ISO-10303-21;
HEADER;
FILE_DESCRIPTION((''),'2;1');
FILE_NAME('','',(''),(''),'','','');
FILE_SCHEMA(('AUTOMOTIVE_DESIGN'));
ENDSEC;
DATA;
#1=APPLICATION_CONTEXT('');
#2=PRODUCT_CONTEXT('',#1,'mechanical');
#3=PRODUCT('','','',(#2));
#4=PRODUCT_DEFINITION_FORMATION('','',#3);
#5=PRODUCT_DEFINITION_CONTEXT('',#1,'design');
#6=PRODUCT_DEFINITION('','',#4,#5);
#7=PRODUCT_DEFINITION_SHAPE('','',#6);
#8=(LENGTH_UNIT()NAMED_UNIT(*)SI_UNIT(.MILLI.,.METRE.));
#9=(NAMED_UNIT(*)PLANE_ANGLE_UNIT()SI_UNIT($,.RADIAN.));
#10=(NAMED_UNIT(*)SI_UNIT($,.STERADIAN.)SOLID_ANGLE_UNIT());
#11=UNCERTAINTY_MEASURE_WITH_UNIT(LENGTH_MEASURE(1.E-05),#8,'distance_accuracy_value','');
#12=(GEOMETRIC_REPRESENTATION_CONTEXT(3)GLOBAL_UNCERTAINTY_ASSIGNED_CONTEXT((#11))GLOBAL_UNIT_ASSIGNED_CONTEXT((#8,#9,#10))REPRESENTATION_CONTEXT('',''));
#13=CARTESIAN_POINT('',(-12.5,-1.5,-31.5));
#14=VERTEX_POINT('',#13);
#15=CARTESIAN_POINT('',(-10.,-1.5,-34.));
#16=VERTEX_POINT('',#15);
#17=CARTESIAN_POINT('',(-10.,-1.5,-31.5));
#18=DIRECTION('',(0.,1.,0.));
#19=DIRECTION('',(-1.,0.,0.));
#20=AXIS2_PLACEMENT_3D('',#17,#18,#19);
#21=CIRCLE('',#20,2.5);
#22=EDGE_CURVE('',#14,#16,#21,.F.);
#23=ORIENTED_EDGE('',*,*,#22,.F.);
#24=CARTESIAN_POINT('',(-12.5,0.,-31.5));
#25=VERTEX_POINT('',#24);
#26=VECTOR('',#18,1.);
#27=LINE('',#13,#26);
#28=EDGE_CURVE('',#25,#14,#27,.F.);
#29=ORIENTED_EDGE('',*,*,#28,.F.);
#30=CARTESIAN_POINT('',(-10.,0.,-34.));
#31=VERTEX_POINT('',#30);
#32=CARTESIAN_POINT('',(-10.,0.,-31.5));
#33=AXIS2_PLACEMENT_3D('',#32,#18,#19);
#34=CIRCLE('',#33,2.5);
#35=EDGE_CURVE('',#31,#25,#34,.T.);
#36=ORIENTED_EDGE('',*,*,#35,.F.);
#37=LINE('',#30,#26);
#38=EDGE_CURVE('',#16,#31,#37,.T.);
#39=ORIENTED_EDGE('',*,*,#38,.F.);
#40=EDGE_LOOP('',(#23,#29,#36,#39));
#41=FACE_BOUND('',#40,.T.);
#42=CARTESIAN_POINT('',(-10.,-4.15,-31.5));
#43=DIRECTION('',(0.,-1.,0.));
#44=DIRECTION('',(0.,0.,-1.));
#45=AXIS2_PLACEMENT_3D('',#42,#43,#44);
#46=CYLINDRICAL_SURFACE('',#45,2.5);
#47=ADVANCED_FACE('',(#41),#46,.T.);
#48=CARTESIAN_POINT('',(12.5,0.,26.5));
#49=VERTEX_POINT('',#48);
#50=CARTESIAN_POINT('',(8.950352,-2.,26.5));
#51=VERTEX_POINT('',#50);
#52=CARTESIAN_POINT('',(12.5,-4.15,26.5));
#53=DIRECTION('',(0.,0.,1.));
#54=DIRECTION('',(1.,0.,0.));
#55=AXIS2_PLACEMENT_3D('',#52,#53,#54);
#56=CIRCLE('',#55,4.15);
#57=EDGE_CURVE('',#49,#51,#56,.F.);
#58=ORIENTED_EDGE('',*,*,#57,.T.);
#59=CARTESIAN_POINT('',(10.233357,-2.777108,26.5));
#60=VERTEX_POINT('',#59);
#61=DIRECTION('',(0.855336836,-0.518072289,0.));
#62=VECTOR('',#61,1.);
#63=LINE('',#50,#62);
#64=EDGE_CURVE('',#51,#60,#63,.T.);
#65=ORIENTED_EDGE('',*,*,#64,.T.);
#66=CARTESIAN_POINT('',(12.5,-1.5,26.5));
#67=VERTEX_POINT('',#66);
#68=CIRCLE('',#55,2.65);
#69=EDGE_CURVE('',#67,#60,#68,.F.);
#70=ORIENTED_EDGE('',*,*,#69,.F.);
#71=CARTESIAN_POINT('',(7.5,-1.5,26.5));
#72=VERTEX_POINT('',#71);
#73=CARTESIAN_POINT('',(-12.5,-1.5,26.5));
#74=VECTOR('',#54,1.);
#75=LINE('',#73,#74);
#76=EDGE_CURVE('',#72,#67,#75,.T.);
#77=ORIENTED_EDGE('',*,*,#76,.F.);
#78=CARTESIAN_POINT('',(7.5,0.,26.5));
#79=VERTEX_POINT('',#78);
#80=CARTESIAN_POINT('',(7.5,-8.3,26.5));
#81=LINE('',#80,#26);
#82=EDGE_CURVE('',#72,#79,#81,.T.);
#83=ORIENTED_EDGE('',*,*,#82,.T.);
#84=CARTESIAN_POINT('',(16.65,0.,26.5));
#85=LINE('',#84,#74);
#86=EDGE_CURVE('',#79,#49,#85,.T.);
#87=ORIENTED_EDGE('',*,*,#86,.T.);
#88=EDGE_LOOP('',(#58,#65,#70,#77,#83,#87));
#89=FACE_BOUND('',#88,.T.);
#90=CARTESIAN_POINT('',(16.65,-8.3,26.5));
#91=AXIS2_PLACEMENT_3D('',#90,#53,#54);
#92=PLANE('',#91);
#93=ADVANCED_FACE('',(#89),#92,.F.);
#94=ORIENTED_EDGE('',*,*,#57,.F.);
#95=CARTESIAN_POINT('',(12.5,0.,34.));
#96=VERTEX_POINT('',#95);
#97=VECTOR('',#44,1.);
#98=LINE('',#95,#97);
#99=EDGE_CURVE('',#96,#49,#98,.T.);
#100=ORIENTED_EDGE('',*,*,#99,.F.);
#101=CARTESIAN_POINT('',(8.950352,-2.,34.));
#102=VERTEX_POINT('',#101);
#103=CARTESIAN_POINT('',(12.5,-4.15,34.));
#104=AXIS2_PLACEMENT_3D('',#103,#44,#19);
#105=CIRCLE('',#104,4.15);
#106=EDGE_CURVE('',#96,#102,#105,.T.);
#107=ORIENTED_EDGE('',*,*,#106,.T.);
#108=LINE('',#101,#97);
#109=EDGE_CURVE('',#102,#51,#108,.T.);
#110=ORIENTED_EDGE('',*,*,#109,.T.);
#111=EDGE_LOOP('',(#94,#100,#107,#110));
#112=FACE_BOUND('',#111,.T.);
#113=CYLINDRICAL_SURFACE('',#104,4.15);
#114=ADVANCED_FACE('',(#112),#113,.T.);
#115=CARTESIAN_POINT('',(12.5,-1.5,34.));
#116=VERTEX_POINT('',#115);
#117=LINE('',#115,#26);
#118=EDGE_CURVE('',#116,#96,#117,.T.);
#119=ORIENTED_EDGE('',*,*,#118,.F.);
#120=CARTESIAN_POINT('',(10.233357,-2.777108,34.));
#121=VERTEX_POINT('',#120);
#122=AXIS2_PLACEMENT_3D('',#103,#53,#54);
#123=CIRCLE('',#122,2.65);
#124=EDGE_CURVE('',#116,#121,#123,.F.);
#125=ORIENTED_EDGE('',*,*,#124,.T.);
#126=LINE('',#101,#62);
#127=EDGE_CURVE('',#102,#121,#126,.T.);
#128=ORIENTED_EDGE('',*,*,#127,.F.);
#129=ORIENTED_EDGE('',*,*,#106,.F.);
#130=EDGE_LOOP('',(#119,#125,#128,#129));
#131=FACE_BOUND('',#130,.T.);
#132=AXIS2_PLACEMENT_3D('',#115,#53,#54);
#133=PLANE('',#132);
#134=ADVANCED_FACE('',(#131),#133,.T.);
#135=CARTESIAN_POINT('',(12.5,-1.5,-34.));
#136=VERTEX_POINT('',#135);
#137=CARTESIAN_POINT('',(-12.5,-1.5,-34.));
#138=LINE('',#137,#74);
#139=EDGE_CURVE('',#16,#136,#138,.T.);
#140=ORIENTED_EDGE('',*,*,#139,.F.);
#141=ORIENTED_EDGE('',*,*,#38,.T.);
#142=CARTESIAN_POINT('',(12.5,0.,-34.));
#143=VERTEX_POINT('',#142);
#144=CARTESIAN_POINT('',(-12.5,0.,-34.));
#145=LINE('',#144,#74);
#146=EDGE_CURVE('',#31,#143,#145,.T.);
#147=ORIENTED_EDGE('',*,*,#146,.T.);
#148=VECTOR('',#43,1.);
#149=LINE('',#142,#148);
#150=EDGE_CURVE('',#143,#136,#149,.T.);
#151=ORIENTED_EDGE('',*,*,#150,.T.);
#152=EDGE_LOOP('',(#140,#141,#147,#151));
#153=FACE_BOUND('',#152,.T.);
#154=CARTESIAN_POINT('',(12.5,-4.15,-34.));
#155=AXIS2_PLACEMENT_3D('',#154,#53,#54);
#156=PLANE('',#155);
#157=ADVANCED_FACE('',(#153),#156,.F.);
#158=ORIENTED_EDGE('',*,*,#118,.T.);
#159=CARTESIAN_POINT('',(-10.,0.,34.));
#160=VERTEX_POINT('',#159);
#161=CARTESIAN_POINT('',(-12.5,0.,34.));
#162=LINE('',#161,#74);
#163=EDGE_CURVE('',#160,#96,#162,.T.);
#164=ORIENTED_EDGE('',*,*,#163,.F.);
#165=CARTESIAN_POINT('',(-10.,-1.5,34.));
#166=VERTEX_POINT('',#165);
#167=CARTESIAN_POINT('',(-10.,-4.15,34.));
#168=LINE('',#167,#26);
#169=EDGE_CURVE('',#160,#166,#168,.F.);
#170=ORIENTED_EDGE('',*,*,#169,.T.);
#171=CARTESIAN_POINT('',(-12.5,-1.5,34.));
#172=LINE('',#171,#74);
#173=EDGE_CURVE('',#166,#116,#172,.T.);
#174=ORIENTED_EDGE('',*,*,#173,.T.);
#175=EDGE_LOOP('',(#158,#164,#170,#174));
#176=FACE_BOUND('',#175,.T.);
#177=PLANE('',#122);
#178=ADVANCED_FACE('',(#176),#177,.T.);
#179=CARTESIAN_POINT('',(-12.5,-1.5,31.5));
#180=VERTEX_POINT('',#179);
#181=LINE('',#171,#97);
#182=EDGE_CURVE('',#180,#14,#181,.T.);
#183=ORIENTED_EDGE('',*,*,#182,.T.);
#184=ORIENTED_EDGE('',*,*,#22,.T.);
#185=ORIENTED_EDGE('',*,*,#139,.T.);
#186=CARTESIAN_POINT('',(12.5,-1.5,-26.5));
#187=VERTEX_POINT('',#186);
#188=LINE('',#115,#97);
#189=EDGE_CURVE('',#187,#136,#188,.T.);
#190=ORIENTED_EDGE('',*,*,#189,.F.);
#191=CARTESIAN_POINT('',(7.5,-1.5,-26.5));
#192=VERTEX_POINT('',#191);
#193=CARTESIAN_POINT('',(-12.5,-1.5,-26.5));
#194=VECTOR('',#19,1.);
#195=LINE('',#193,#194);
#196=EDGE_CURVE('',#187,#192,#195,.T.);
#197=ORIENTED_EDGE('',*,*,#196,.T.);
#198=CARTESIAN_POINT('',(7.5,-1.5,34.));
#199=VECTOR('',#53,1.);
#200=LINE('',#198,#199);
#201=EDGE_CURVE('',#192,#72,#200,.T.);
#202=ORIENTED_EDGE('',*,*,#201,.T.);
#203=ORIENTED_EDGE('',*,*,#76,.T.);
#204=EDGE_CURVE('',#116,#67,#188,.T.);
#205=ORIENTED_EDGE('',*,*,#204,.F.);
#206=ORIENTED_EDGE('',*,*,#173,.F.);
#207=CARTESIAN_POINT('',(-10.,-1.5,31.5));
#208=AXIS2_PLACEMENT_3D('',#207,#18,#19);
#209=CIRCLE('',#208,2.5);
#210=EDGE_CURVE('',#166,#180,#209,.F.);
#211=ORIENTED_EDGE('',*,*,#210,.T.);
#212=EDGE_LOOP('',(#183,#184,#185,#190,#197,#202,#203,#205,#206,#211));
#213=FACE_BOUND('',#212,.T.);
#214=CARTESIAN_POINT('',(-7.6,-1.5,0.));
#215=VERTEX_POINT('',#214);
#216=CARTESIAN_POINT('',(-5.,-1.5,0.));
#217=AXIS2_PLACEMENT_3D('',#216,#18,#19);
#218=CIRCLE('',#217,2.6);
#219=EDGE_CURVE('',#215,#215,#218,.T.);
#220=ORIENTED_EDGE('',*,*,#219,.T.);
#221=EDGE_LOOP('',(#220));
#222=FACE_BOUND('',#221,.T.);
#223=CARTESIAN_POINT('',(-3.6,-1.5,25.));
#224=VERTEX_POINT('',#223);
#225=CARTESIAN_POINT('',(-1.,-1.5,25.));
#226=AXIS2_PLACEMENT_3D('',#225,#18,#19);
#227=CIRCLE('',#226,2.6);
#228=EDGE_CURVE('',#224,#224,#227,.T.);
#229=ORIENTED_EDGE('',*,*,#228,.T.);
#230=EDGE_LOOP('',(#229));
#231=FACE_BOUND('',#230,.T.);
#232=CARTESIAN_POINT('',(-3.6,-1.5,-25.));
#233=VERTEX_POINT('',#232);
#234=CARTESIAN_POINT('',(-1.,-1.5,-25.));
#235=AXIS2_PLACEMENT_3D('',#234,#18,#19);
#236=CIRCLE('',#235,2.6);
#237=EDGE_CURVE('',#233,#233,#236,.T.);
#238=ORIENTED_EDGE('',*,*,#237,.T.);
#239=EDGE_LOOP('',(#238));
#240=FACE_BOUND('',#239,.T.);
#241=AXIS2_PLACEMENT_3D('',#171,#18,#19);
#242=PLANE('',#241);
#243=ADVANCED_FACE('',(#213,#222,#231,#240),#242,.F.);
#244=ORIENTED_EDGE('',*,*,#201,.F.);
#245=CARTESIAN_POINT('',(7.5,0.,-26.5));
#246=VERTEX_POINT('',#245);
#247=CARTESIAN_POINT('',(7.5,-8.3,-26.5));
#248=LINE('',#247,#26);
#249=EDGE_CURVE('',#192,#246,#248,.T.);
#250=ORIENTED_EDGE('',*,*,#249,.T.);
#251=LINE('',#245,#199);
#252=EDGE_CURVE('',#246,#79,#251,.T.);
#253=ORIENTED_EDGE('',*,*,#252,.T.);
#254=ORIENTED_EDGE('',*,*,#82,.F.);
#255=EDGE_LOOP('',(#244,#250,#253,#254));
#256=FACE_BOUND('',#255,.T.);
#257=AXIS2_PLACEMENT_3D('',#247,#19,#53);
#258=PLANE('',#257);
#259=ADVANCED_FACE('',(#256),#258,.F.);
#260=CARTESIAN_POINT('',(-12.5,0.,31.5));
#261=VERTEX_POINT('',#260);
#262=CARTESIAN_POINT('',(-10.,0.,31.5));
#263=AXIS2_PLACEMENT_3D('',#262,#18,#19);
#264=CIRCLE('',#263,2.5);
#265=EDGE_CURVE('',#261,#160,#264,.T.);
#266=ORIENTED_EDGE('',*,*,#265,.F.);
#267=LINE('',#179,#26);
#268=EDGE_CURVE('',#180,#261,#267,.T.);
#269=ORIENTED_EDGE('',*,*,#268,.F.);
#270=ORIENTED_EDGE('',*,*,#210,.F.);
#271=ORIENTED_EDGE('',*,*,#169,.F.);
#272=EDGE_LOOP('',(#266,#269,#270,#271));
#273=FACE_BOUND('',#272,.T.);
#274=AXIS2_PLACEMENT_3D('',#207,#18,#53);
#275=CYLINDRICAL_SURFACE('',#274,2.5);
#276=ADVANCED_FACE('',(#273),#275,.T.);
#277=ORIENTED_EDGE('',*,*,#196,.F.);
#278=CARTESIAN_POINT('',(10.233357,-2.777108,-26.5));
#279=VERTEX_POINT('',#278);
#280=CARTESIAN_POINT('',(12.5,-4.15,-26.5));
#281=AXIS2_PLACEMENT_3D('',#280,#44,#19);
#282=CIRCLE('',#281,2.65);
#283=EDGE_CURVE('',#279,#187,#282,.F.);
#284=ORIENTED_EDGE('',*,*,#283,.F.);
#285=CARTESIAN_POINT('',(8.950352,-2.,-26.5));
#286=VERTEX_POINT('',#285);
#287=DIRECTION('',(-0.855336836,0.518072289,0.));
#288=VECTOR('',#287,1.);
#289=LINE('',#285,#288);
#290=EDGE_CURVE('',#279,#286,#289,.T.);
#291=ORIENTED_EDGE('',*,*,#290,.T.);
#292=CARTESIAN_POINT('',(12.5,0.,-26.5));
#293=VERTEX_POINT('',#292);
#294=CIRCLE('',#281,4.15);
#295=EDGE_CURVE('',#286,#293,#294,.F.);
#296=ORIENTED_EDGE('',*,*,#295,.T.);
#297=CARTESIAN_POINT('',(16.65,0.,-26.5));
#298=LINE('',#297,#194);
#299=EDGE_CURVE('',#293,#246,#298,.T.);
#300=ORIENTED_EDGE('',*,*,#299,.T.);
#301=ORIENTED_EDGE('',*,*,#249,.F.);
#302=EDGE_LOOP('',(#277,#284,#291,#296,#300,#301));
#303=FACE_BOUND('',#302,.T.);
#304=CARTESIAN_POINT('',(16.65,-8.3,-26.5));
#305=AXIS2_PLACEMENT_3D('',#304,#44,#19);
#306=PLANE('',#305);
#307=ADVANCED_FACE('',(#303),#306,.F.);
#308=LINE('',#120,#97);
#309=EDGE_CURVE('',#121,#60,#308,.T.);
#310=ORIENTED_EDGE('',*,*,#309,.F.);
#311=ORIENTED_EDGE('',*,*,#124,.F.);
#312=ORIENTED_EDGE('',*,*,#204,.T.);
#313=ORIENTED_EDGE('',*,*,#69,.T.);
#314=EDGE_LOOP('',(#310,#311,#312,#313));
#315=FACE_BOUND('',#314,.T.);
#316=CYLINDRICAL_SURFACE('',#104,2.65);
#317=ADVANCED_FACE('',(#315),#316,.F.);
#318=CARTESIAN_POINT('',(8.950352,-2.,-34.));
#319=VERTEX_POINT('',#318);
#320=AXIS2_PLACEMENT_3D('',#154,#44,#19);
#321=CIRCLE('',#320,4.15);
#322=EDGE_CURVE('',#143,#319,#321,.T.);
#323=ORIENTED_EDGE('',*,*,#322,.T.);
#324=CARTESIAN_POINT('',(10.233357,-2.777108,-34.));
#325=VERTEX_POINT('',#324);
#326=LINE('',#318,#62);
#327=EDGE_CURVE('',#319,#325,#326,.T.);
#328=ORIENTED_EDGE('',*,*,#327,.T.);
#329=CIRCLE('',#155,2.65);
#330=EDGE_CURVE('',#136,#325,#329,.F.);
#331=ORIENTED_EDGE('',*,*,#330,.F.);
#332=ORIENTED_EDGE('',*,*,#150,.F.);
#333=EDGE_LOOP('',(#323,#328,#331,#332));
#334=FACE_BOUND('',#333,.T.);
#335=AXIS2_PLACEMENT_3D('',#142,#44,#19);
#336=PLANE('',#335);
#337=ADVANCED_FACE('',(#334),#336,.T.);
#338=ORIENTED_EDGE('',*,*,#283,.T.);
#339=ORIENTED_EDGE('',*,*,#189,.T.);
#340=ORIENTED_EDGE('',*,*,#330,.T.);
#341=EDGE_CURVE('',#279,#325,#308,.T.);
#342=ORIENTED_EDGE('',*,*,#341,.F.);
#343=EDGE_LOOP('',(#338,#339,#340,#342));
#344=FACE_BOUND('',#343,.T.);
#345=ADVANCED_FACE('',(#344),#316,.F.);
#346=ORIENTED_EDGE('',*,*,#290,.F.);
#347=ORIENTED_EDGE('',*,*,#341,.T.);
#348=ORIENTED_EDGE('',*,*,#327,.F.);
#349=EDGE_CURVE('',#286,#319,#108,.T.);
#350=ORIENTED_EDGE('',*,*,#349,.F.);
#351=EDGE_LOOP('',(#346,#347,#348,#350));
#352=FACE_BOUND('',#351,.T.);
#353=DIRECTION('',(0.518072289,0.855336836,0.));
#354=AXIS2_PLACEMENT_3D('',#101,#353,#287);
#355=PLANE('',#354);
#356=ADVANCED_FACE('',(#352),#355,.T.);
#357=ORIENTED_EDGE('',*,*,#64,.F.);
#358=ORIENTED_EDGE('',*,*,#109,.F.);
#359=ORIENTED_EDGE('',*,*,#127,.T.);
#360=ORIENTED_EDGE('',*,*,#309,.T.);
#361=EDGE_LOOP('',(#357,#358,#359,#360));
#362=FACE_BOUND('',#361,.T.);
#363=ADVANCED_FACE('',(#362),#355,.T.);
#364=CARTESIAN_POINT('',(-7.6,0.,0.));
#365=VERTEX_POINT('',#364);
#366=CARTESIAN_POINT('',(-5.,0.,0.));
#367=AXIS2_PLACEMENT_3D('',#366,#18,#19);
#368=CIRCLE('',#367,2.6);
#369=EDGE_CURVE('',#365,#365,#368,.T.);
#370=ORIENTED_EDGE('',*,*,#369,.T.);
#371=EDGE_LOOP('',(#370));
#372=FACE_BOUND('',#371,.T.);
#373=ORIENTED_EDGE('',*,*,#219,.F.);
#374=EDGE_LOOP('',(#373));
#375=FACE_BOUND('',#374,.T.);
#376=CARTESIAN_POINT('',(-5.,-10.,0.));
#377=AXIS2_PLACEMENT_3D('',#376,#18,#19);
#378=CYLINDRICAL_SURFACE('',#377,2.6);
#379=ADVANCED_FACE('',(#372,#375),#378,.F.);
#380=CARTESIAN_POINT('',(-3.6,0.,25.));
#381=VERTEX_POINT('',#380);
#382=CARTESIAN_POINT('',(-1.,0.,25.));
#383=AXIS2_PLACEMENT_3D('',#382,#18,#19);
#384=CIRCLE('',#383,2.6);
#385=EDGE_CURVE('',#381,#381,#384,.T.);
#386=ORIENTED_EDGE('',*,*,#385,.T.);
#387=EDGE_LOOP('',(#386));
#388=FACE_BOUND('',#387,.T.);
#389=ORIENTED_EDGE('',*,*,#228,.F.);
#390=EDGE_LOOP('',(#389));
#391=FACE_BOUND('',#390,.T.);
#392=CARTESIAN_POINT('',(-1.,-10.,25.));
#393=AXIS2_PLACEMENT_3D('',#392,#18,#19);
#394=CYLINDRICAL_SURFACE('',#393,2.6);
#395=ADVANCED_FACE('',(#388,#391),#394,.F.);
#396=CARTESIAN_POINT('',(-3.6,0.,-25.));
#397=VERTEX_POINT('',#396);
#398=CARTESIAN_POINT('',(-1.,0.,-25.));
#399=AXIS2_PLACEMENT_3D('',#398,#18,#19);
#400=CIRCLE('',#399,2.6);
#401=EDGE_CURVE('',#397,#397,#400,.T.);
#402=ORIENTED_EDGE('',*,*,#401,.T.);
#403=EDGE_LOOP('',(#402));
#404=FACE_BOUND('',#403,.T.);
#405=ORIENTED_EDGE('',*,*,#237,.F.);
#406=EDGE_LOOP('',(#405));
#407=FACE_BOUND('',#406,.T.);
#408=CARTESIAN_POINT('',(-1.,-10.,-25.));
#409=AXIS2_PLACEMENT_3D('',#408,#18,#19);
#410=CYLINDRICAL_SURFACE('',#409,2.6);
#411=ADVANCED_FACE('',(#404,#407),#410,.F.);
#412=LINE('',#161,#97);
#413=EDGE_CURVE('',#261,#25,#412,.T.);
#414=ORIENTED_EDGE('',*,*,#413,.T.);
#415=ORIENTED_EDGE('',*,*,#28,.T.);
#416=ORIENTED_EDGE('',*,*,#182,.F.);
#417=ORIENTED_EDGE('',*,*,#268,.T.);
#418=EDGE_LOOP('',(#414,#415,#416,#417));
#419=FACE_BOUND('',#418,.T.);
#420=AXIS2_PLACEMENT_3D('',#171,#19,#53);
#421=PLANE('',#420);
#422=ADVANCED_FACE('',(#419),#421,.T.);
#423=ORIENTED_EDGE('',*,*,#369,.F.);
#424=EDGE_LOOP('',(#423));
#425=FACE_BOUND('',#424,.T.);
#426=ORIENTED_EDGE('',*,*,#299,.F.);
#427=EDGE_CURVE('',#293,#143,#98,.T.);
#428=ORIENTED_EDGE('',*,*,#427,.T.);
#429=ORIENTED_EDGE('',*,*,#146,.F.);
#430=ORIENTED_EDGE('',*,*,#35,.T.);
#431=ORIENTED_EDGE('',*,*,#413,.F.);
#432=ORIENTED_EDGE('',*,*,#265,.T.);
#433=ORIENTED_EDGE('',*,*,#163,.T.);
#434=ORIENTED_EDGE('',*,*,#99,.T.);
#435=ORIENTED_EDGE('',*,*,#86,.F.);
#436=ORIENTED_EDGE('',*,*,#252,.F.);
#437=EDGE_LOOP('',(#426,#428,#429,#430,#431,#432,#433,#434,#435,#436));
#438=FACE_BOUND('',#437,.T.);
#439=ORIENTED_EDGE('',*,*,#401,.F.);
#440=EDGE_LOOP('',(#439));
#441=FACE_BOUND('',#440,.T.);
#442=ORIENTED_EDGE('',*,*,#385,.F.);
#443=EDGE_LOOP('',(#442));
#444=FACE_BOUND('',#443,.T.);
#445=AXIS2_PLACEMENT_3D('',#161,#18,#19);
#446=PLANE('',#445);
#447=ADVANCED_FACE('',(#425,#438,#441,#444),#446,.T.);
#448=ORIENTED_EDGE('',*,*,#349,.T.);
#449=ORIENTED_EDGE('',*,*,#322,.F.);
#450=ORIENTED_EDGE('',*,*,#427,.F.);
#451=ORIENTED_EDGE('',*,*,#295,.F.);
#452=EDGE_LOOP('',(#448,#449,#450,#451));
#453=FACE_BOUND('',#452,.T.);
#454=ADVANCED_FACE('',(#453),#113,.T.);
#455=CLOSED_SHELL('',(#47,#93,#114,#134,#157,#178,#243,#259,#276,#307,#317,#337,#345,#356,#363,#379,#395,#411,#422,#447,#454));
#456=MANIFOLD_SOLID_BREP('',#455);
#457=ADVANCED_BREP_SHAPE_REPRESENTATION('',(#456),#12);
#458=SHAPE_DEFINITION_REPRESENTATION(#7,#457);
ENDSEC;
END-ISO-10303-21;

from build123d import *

# Parameters (mm, degrees)
TABAN_FLAN_1_DEPTH    = 34
IZIM9_W               = 9.15
IZIM9_H               = 53
KES_EKSTR_ZYON1_DEPTH = 39.757096124
IZIM11_R              = 2.6
KES_EKSTR_ZYON2_DEPTH = 10
RADYUS1_R             = 2.5


# Sheet-metal steps are written as plain solids
with BuildPart() as part:
    # Çizim1 → Taban-Flanş1 (new, symmetric)
    with BuildSketch(Plane.XY):
        with BuildLine():
            Line((-12.5, 0), (12.5, 0))
            ThreePointArc((12.5, 0), (14.537154879, -7.765591238), (8.95035213, -2))
            Line((8.95035213, -2), (10.233357384, -2.777108434))
            ThreePointArc((10.233357384, -2.777108434), (13.800833838, -6.458751031), (12.5, -1.5))
            Line((12.5, -1.5), (-12.5, -1.5))
            Line((-12.5, -1.5), (-12.5, 0))
        make_face()
    extrude(amount=TABAN_FLAN_1_DEPTH, both=True)

    # Çizim9 → Kes-Ekstrüzyon1 (cut, through all)
    with BuildSketch(Plane(origin=(0, 0, 0), x_dir=(1, 0, 0), z_dir=(0, 1, 0))):
        with Locations((12.075, 0)):
            Rectangle(IZIM9_W, IZIM9_H)
    extrude(amount=-KES_EKSTR_ZYON1_DEPTH, mode=Mode.SUBTRACT)

    # Çizim11 → Kes-Ekstrüzyon2 (cut)
    with BuildSketch(Plane(origin=(0, 0, 0), x_dir=(1, 0, 0), z_dir=(0, 1, 0))):
        with Locations(Location((-1, 25, 0), (0, 0, 180))):
            Circle(IZIM11_R)
        with Locations(Location((-1, -25, 0), (0, 0, 180))):
            Circle(IZIM11_R)
        with Locations(Location((-5, 0, 0), (0, 0, 180))):
            Circle(IZIM11_R)
    extrude(amount=-KES_EKSTR_ZYON2_DEPTH, mode=Mode.SUBTRACT)

    # Radyus1
    radyus1_edges = [part.edges().sort_by_distance(p)[0] for p in [
        (-12.5, -0.75, 34),
        (-12.5, -0.75, -34),
    ]]
    fillet(radyus1_edges, radius=RADYUS1_R)


solid = part.part
